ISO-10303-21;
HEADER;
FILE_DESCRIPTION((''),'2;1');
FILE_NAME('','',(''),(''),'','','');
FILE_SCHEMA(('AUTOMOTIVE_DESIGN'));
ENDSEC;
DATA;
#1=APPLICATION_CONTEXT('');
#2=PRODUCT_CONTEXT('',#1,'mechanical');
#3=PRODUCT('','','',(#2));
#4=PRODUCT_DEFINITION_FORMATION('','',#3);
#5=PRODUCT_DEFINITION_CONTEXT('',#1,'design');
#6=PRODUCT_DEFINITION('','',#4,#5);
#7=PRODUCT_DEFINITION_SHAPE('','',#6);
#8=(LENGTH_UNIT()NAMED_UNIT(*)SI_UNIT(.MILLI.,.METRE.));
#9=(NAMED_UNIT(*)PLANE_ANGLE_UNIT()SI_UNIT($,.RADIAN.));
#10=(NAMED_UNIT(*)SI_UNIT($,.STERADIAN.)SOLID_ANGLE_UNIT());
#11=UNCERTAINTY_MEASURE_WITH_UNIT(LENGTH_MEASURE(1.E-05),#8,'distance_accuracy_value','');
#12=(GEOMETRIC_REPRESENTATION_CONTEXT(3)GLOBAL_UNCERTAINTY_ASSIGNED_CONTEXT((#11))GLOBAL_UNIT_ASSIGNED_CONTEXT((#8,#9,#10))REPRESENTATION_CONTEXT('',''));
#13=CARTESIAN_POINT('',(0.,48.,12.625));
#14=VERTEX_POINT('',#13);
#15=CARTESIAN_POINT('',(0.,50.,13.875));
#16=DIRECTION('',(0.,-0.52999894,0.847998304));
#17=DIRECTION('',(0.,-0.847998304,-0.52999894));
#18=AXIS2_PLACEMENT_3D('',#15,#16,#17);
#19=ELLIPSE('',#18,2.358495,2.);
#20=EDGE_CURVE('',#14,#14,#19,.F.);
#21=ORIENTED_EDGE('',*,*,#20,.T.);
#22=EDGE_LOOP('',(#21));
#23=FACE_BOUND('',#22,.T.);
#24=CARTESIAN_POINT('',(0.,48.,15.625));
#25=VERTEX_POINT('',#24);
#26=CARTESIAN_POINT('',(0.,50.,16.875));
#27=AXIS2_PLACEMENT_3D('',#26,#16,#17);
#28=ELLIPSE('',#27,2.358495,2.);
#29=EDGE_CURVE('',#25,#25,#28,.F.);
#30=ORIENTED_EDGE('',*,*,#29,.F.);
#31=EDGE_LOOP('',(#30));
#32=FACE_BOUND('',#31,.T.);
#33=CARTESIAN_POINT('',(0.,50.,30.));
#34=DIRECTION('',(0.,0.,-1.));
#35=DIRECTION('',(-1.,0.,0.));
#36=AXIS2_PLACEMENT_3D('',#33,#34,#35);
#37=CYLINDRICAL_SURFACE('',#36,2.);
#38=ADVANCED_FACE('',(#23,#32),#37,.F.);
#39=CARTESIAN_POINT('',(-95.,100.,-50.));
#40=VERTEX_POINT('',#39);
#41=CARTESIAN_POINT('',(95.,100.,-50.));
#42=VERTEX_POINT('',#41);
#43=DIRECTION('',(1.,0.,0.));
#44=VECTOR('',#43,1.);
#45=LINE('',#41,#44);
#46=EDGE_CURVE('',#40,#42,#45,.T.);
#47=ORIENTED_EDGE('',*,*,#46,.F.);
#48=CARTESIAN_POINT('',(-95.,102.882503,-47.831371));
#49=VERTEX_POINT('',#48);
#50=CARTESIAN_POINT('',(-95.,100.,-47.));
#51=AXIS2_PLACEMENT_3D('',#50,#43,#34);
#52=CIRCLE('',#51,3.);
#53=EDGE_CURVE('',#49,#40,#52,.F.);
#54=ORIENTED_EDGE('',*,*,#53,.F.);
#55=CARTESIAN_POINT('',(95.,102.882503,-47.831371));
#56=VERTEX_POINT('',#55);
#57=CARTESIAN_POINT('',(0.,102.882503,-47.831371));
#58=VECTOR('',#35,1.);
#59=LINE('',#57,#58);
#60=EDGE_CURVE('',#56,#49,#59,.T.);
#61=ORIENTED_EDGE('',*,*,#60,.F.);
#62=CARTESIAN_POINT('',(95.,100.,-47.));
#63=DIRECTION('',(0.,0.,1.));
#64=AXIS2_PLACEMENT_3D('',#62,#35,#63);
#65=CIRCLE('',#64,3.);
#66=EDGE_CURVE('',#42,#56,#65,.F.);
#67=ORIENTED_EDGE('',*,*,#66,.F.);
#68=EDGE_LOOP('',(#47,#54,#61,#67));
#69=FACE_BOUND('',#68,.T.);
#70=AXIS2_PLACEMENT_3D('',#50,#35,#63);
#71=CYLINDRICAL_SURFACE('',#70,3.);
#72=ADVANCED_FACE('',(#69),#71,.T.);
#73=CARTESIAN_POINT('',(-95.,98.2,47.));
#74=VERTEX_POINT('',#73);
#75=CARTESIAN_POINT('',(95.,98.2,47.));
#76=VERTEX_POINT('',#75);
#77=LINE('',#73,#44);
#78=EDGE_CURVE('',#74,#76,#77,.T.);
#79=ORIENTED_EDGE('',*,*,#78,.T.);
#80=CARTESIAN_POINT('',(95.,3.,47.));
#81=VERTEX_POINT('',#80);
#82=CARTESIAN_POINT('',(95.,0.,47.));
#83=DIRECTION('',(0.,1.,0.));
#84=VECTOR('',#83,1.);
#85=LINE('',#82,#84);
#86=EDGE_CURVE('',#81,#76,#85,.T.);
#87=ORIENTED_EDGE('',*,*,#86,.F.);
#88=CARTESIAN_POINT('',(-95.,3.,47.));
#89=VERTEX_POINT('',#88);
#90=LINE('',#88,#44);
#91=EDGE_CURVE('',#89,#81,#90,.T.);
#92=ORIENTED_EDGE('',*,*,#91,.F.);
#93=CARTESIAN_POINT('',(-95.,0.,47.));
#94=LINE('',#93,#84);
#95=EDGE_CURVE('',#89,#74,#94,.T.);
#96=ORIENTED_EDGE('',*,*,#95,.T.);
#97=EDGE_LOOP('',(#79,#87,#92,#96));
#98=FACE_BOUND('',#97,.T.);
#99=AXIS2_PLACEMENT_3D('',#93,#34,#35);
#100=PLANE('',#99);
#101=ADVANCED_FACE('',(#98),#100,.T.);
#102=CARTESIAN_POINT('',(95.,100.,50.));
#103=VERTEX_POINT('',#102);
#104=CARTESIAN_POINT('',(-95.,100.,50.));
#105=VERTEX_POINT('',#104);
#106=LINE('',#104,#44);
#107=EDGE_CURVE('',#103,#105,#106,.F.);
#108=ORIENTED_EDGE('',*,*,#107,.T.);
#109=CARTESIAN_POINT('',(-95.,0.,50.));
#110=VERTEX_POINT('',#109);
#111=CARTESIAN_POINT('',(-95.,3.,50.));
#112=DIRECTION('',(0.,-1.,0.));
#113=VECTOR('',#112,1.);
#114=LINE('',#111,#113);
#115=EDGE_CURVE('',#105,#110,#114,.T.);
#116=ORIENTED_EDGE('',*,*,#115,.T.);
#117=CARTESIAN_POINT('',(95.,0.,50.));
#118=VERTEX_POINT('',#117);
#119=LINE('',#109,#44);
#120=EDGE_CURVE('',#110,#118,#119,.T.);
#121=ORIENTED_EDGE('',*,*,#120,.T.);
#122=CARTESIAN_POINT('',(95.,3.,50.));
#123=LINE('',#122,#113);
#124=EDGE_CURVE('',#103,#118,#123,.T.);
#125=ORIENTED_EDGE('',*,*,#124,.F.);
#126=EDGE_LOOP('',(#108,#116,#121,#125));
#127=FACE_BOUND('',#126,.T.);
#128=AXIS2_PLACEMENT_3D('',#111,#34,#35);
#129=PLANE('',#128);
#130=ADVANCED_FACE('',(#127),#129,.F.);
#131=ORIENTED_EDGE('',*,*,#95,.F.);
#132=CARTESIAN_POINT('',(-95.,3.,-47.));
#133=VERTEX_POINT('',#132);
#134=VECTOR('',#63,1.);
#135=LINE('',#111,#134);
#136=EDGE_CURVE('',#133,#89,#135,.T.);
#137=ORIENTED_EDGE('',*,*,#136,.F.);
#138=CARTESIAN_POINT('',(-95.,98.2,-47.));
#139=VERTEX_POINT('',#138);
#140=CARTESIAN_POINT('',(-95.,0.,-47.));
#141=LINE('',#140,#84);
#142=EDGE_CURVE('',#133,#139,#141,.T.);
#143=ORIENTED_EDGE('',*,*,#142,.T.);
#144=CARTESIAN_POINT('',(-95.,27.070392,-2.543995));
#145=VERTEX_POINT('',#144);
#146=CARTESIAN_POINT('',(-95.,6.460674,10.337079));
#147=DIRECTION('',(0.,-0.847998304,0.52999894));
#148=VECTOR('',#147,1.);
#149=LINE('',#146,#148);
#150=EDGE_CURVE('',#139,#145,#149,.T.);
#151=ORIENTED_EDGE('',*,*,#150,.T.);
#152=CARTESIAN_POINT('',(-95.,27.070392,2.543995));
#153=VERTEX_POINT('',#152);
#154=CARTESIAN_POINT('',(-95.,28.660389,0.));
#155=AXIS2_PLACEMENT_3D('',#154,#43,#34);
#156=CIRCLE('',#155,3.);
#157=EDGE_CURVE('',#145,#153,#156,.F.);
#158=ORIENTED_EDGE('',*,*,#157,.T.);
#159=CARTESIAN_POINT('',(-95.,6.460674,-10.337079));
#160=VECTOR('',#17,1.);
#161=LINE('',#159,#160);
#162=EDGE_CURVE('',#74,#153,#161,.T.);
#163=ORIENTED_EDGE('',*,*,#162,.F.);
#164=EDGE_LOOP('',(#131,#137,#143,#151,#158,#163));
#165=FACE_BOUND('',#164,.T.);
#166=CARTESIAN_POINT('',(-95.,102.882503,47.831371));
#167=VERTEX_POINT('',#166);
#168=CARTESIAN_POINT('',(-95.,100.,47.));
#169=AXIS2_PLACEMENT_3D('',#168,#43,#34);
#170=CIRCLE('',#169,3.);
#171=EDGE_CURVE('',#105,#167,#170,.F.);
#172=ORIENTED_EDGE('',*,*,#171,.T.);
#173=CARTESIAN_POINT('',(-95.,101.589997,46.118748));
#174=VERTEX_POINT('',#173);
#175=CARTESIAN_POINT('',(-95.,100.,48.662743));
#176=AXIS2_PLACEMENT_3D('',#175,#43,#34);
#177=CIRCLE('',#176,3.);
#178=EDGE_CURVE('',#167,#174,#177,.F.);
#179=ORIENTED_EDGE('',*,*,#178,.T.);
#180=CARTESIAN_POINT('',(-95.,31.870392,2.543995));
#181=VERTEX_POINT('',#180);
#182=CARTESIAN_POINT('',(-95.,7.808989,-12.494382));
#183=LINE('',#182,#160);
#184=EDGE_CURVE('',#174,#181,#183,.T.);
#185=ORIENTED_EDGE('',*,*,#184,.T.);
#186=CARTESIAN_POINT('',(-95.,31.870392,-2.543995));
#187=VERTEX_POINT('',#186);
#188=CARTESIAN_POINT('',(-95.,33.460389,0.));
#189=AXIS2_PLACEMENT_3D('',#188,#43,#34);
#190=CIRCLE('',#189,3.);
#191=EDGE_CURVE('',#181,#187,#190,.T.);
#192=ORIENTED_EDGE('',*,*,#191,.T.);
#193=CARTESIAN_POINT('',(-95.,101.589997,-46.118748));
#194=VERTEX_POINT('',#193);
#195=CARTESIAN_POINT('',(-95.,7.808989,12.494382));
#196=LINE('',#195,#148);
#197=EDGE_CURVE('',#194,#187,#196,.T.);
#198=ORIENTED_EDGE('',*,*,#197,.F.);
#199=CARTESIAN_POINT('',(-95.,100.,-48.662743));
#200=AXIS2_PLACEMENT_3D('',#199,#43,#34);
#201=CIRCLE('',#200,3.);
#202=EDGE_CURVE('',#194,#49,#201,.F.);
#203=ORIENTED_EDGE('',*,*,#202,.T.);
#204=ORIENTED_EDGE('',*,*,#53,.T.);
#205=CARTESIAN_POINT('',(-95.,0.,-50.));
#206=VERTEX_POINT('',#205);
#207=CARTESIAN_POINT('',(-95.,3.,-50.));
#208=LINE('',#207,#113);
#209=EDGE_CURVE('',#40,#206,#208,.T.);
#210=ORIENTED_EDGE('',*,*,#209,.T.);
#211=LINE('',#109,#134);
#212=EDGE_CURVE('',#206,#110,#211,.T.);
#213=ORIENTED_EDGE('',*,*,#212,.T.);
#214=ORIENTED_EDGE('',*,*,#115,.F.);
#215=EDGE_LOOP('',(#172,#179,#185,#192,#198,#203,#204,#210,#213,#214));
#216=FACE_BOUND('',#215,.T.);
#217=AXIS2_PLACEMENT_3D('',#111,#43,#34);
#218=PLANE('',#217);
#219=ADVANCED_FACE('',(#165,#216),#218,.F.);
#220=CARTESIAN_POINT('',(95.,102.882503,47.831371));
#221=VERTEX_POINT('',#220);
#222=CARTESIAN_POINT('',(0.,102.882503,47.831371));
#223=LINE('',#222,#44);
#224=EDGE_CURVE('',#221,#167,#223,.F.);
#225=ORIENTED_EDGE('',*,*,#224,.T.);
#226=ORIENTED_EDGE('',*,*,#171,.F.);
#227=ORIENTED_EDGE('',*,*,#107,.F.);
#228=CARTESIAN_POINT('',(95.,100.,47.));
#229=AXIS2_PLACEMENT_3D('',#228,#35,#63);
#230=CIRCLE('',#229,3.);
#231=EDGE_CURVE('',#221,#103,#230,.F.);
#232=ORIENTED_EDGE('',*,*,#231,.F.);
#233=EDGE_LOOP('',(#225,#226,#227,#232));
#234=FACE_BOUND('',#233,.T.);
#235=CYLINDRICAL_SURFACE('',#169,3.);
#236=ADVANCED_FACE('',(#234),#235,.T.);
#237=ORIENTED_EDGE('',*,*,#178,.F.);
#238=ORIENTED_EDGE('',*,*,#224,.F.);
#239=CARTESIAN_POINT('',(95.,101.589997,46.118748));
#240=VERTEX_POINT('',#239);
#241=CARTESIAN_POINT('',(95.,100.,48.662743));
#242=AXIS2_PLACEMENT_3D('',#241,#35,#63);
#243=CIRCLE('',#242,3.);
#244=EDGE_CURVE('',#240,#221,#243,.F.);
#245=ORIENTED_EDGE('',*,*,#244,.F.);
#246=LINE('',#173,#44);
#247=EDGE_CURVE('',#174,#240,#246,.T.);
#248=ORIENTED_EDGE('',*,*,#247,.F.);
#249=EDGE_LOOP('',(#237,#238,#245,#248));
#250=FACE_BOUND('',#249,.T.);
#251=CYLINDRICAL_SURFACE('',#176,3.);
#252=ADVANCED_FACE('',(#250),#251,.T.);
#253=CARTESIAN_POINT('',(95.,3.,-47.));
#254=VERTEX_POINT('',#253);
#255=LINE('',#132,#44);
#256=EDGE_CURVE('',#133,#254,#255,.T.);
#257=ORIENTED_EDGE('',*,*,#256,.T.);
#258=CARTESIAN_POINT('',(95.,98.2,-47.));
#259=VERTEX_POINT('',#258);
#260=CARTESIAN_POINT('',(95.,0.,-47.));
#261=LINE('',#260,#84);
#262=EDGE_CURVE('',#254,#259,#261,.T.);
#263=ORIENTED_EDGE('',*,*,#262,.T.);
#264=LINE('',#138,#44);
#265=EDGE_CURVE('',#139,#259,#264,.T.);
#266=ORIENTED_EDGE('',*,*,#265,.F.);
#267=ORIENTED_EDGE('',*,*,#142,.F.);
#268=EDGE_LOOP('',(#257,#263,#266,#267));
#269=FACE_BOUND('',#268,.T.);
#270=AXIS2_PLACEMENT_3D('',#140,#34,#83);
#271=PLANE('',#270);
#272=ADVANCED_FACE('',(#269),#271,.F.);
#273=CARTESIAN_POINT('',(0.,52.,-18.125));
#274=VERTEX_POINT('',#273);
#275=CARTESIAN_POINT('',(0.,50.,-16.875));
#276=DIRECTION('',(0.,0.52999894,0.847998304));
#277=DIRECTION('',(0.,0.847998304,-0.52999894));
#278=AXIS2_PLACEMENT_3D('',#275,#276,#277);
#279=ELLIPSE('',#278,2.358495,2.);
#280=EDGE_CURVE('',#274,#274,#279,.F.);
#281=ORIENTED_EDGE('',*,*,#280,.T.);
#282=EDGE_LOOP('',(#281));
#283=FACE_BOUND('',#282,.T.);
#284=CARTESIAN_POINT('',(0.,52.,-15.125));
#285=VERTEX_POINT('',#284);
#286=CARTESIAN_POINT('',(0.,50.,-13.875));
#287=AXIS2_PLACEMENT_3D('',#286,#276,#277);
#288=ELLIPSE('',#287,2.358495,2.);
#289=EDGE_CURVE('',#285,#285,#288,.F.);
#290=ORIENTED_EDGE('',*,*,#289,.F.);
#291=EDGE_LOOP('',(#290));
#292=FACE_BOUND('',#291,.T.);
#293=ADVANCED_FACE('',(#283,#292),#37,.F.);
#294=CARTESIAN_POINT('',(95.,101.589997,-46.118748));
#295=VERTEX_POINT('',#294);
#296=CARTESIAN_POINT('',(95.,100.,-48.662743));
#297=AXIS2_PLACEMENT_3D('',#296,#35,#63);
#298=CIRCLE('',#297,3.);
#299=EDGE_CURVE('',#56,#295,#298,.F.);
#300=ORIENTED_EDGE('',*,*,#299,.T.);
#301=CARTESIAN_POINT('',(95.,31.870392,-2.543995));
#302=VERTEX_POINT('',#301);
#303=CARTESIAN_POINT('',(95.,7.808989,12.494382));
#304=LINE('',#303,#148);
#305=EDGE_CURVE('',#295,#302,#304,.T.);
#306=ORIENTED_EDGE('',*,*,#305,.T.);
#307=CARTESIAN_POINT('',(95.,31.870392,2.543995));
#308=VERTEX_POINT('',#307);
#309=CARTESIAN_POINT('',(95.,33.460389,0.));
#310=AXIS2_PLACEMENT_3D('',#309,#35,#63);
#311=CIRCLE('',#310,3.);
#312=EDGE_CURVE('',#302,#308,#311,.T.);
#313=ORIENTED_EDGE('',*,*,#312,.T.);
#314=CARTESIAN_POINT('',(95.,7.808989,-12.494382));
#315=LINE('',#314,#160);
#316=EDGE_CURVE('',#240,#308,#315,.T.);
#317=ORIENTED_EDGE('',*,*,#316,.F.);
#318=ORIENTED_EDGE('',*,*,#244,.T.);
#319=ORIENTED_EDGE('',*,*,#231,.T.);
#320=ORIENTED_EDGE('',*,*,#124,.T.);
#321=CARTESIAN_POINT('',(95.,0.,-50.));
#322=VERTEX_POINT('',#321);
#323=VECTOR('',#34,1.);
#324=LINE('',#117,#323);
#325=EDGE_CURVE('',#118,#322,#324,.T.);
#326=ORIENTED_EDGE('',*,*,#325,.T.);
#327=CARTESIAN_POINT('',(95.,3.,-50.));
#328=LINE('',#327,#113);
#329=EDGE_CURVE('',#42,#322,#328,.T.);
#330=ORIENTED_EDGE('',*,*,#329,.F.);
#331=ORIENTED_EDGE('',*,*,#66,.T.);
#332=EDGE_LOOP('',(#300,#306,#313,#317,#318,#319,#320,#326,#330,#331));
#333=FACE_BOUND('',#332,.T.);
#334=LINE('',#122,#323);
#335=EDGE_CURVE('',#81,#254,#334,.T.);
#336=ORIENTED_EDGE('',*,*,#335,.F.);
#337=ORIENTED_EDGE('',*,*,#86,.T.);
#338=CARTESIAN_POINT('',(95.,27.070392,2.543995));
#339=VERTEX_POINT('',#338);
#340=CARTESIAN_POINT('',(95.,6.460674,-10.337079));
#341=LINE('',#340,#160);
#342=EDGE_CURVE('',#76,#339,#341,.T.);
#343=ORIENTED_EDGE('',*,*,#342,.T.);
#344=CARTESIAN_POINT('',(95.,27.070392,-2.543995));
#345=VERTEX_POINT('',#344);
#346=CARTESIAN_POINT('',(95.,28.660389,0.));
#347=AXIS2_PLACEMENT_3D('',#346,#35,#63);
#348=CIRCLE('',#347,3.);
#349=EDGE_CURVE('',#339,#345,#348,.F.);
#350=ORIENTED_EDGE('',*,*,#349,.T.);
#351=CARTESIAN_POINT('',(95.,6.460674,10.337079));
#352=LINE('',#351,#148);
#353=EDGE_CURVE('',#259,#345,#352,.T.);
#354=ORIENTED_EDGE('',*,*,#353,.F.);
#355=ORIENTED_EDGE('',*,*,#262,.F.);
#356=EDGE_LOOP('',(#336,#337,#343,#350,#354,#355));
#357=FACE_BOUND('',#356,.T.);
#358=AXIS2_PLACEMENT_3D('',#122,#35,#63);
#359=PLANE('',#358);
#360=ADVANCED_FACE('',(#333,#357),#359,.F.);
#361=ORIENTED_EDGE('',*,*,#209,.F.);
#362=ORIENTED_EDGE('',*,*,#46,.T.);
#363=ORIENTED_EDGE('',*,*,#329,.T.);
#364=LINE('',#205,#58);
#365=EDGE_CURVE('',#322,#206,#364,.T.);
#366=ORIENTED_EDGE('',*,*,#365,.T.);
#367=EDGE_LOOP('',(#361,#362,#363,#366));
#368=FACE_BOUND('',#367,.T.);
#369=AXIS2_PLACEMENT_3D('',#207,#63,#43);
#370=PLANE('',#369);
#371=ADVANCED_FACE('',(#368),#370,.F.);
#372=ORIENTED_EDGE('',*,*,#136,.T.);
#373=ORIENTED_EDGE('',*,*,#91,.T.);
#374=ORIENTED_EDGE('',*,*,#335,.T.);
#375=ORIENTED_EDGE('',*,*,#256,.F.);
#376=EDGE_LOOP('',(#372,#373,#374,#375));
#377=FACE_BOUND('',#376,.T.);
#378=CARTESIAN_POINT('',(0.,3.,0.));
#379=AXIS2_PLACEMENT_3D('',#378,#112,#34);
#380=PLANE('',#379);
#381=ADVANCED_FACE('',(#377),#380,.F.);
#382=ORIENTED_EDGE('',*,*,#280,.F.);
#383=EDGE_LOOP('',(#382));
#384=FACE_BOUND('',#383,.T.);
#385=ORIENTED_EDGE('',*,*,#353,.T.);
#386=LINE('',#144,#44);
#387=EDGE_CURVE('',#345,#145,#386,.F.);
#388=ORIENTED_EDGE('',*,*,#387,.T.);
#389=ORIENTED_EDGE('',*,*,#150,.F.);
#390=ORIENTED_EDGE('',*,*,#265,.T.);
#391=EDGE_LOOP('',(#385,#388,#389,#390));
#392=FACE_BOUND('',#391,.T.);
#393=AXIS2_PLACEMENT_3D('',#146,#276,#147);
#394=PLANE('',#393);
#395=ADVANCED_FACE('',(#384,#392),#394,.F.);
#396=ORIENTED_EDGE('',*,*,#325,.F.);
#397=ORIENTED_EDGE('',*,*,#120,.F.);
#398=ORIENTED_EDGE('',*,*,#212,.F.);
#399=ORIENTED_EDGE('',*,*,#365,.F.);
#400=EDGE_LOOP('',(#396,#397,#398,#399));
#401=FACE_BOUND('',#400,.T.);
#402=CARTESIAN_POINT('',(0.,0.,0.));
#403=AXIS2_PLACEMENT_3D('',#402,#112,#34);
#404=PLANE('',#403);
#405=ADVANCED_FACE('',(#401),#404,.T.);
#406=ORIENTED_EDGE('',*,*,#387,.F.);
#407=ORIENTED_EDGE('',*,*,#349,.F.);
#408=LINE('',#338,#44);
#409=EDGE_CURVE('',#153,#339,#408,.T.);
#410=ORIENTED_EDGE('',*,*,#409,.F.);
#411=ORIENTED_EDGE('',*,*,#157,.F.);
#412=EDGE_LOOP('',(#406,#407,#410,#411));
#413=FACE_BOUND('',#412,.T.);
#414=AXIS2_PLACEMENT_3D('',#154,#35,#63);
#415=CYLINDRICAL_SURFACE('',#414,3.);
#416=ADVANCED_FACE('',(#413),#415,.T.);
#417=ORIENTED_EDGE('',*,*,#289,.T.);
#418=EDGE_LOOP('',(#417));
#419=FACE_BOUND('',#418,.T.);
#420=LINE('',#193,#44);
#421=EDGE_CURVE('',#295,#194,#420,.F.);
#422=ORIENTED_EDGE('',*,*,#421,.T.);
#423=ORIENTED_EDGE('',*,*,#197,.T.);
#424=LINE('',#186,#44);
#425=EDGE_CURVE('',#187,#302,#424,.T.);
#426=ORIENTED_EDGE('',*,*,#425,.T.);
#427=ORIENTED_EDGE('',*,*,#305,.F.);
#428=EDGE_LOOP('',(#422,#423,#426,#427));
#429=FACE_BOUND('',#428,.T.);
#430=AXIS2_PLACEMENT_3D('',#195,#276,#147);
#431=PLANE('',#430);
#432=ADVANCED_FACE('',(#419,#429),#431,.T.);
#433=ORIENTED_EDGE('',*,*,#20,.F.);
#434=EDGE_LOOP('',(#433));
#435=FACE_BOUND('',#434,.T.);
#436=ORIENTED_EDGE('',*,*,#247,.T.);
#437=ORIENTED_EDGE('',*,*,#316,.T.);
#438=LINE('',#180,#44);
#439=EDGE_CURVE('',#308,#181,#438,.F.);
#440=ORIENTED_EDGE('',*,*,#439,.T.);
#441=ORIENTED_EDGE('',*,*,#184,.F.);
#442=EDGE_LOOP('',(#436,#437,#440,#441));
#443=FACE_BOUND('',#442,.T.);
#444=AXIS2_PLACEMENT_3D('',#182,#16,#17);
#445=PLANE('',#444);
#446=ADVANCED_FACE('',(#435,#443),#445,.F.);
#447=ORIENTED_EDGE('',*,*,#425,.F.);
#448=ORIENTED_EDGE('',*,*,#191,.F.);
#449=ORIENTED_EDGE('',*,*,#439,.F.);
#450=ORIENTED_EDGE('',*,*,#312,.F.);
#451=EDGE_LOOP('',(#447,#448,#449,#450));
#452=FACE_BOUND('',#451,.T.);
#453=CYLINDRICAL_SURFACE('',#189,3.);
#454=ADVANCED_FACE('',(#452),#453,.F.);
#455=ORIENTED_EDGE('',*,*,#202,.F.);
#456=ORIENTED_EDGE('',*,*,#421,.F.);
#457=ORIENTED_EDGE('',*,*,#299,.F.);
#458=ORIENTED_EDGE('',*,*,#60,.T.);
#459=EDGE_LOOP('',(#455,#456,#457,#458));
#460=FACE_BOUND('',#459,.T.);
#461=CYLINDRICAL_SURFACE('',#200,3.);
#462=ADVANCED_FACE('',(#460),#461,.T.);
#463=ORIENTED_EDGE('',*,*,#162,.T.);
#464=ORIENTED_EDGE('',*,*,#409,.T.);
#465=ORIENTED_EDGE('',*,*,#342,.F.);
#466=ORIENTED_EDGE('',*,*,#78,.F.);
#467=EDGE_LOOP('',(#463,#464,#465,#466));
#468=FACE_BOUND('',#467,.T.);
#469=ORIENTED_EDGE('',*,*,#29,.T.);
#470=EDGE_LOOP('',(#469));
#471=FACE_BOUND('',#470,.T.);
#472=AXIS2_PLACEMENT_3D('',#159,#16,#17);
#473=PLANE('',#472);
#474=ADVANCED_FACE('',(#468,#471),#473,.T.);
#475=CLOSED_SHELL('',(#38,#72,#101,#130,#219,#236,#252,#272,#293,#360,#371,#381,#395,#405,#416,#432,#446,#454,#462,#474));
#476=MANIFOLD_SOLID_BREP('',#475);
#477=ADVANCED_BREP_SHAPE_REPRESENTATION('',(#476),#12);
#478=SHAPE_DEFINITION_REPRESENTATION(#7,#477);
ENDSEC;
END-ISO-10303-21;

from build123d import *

# Parameters (mm, degrees)
SKETCH1_W                = 190
SKETCH1_H                = 100
BOSS_EXTRUDE1_DEPTH      = 3
BOSS_EXTRUDE2_DEPTH      = 95
BOSS_EXTRUDE2_DEPTH_BACK = 95
SKETCH2_W                = 3
SKETCH2_H                = 100
FILLET1_R                = 3
CUT_EXTRUDE1_DEPTH       = 30
CUT_EXTRUDE1_DEPTH_BACK  = 30
SKETCH3_R                = 2


with BuildPart() as part:
    # Sketch1 → Boss-Extrude1 (new body)
    with BuildSketch(Plane(origin=(0, 0, 0), x_dir=(1, 0, 0), z_dir=(0, 1, 0))):
        Rectangle(SKETCH1_W, SKETCH1_H)
    extrude(amount=BOSS_EXTRUDE1_DEPTH)

    # Sketch2 → Boss-Extrude2 (add, two sides: drawn at the far end of the back side and taken through both)
    with BuildSketch(Plane(origin=(0, 0, 0), x_dir=(0, 0, -1), z_dir=(1, 0, 0)).offset(-BOSS_EXTRUDE2_DEPTH_BACK)):
        with Locations((-48.5, 53)):
            Rectangle(SKETCH2_W, SKETCH2_H)
        Polygon((0, 23), (0, 27.8), (-47, 103), (-47, 98.2), align=None)
        Polygon((47, 98.2), (47, 103), (0, 27.8), (0, 23), align=None)
        with Locations((48.5, 53)):
            Rectangle(SKETCH2_W, SKETCH2_H)
    extrude(amount=BOSS_EXTRUDE2_DEPTH + BOSS_EXTRUDE2_DEPTH_BACK)

    # Fillet1
    # the kernel refuses this fillet: 3 mm, written as the material it adds along each edge
    with BuildSketch(Plane(origin=(-95, 27.8, 0), x_dir=(0, 0.8479983040050875, -0.529998940003181), z_dir=(1, 0, 0))) as fillet1_piece_1:
        with BuildLine():
            CenterArc((FILLET1_R * 1.6, FILLET1_R), FILLET1_R, 154.010766416, 115.989233584)
            Line((FILLET1_R * 0.701123595506, FILLET1_R * 1.43820224719), (0, 0))
            Line((0, 0), (FILLET1_R * 1.6, 0))
        make_face()
    extrude(amount=190)
    # the kernel refuses this fillet: 3 mm, written as the material it takes off along each edge
    with BuildSketch(Plane(origin=(-107, 23, 0), x_dir=(0, 0.8479983040050876, 0.5299989400031808), z_dir=(1, 0, 0))) as fillet1_2_piece_1:
        with BuildLine():
            CenterArc((FILLET1_R * 1.6, -FILLET1_R), FILLET1_R, 90, 115.989233584)
            Line((FILLET1_R * 0.701123595506, -FILLET1_R * 1.43820224719), (0, 0))
            Line((0, 0), (FILLET1_R * 1.6, 0))
        make_face()
    extrude(amount=214, mode=Mode.SUBTRACT)
    with BuildSketch(Plane(origin=(102.5, 103, 50), x_dir=(0, -1, 0), z_dir=(-1, 0, 0)), Plane(origin=(-102.5, 103, -50), x_dir=(0, -1, 0), z_dir=(1, 0, 0))) as fillet1_2_piece_2:
        with BuildLine():
            CenterArc((FILLET1_R, -FILLET1_R), FILLET1_R, 90, 90)
            Line((0, -FILLET1_R), (0, 0))
            Line((0, 0), (FILLET1_R, 0))
        make_face()
    extrude(amount=205, mode=Mode.SUBTRACT)
    with BuildSketch(Plane(origin=(99.156857311, 103, 47), x_dir=(0, 0, 1), z_dir=(-1, 0, 0)), Plane(origin=(-99.156857311, 103, -47), x_dir=(0, 0, -1), z_dir=(1, 0, 0))) as fillet1_2_piece_3:
        with BuildLine():
            CenterArc((FILLET1_R * 0.554247641507, -FILLET1_R), FILLET1_R, 90, 57.994616792)
            Line((-FILLET1_R * 0.293750662498, -FILLET1_R * 0.470001059997), (0, 0))
            Line((0, 0), (FILLET1_R * 0.554247641507, 0))
        make_face()
    extrude(amount=198.313714623, mode=Mode.SUBTRACT)

    # Sketch3 → Cut-Extrude1 (cut, two sides: drawn at the far end of the back side and taken through both)
    with BuildSketch(Plane.XY.offset(-CUT_EXTRUDE1_DEPTH_BACK)):
        with Locations(Location((0, 50, 0), (0, 0, 270))):
            Circle(SKETCH3_R)
    extrude(amount=CUT_EXTRUDE1_DEPTH + CUT_EXTRUDE1_DEPTH_BACK, mode=Mode.SUBTRACT)


solid = part.part
